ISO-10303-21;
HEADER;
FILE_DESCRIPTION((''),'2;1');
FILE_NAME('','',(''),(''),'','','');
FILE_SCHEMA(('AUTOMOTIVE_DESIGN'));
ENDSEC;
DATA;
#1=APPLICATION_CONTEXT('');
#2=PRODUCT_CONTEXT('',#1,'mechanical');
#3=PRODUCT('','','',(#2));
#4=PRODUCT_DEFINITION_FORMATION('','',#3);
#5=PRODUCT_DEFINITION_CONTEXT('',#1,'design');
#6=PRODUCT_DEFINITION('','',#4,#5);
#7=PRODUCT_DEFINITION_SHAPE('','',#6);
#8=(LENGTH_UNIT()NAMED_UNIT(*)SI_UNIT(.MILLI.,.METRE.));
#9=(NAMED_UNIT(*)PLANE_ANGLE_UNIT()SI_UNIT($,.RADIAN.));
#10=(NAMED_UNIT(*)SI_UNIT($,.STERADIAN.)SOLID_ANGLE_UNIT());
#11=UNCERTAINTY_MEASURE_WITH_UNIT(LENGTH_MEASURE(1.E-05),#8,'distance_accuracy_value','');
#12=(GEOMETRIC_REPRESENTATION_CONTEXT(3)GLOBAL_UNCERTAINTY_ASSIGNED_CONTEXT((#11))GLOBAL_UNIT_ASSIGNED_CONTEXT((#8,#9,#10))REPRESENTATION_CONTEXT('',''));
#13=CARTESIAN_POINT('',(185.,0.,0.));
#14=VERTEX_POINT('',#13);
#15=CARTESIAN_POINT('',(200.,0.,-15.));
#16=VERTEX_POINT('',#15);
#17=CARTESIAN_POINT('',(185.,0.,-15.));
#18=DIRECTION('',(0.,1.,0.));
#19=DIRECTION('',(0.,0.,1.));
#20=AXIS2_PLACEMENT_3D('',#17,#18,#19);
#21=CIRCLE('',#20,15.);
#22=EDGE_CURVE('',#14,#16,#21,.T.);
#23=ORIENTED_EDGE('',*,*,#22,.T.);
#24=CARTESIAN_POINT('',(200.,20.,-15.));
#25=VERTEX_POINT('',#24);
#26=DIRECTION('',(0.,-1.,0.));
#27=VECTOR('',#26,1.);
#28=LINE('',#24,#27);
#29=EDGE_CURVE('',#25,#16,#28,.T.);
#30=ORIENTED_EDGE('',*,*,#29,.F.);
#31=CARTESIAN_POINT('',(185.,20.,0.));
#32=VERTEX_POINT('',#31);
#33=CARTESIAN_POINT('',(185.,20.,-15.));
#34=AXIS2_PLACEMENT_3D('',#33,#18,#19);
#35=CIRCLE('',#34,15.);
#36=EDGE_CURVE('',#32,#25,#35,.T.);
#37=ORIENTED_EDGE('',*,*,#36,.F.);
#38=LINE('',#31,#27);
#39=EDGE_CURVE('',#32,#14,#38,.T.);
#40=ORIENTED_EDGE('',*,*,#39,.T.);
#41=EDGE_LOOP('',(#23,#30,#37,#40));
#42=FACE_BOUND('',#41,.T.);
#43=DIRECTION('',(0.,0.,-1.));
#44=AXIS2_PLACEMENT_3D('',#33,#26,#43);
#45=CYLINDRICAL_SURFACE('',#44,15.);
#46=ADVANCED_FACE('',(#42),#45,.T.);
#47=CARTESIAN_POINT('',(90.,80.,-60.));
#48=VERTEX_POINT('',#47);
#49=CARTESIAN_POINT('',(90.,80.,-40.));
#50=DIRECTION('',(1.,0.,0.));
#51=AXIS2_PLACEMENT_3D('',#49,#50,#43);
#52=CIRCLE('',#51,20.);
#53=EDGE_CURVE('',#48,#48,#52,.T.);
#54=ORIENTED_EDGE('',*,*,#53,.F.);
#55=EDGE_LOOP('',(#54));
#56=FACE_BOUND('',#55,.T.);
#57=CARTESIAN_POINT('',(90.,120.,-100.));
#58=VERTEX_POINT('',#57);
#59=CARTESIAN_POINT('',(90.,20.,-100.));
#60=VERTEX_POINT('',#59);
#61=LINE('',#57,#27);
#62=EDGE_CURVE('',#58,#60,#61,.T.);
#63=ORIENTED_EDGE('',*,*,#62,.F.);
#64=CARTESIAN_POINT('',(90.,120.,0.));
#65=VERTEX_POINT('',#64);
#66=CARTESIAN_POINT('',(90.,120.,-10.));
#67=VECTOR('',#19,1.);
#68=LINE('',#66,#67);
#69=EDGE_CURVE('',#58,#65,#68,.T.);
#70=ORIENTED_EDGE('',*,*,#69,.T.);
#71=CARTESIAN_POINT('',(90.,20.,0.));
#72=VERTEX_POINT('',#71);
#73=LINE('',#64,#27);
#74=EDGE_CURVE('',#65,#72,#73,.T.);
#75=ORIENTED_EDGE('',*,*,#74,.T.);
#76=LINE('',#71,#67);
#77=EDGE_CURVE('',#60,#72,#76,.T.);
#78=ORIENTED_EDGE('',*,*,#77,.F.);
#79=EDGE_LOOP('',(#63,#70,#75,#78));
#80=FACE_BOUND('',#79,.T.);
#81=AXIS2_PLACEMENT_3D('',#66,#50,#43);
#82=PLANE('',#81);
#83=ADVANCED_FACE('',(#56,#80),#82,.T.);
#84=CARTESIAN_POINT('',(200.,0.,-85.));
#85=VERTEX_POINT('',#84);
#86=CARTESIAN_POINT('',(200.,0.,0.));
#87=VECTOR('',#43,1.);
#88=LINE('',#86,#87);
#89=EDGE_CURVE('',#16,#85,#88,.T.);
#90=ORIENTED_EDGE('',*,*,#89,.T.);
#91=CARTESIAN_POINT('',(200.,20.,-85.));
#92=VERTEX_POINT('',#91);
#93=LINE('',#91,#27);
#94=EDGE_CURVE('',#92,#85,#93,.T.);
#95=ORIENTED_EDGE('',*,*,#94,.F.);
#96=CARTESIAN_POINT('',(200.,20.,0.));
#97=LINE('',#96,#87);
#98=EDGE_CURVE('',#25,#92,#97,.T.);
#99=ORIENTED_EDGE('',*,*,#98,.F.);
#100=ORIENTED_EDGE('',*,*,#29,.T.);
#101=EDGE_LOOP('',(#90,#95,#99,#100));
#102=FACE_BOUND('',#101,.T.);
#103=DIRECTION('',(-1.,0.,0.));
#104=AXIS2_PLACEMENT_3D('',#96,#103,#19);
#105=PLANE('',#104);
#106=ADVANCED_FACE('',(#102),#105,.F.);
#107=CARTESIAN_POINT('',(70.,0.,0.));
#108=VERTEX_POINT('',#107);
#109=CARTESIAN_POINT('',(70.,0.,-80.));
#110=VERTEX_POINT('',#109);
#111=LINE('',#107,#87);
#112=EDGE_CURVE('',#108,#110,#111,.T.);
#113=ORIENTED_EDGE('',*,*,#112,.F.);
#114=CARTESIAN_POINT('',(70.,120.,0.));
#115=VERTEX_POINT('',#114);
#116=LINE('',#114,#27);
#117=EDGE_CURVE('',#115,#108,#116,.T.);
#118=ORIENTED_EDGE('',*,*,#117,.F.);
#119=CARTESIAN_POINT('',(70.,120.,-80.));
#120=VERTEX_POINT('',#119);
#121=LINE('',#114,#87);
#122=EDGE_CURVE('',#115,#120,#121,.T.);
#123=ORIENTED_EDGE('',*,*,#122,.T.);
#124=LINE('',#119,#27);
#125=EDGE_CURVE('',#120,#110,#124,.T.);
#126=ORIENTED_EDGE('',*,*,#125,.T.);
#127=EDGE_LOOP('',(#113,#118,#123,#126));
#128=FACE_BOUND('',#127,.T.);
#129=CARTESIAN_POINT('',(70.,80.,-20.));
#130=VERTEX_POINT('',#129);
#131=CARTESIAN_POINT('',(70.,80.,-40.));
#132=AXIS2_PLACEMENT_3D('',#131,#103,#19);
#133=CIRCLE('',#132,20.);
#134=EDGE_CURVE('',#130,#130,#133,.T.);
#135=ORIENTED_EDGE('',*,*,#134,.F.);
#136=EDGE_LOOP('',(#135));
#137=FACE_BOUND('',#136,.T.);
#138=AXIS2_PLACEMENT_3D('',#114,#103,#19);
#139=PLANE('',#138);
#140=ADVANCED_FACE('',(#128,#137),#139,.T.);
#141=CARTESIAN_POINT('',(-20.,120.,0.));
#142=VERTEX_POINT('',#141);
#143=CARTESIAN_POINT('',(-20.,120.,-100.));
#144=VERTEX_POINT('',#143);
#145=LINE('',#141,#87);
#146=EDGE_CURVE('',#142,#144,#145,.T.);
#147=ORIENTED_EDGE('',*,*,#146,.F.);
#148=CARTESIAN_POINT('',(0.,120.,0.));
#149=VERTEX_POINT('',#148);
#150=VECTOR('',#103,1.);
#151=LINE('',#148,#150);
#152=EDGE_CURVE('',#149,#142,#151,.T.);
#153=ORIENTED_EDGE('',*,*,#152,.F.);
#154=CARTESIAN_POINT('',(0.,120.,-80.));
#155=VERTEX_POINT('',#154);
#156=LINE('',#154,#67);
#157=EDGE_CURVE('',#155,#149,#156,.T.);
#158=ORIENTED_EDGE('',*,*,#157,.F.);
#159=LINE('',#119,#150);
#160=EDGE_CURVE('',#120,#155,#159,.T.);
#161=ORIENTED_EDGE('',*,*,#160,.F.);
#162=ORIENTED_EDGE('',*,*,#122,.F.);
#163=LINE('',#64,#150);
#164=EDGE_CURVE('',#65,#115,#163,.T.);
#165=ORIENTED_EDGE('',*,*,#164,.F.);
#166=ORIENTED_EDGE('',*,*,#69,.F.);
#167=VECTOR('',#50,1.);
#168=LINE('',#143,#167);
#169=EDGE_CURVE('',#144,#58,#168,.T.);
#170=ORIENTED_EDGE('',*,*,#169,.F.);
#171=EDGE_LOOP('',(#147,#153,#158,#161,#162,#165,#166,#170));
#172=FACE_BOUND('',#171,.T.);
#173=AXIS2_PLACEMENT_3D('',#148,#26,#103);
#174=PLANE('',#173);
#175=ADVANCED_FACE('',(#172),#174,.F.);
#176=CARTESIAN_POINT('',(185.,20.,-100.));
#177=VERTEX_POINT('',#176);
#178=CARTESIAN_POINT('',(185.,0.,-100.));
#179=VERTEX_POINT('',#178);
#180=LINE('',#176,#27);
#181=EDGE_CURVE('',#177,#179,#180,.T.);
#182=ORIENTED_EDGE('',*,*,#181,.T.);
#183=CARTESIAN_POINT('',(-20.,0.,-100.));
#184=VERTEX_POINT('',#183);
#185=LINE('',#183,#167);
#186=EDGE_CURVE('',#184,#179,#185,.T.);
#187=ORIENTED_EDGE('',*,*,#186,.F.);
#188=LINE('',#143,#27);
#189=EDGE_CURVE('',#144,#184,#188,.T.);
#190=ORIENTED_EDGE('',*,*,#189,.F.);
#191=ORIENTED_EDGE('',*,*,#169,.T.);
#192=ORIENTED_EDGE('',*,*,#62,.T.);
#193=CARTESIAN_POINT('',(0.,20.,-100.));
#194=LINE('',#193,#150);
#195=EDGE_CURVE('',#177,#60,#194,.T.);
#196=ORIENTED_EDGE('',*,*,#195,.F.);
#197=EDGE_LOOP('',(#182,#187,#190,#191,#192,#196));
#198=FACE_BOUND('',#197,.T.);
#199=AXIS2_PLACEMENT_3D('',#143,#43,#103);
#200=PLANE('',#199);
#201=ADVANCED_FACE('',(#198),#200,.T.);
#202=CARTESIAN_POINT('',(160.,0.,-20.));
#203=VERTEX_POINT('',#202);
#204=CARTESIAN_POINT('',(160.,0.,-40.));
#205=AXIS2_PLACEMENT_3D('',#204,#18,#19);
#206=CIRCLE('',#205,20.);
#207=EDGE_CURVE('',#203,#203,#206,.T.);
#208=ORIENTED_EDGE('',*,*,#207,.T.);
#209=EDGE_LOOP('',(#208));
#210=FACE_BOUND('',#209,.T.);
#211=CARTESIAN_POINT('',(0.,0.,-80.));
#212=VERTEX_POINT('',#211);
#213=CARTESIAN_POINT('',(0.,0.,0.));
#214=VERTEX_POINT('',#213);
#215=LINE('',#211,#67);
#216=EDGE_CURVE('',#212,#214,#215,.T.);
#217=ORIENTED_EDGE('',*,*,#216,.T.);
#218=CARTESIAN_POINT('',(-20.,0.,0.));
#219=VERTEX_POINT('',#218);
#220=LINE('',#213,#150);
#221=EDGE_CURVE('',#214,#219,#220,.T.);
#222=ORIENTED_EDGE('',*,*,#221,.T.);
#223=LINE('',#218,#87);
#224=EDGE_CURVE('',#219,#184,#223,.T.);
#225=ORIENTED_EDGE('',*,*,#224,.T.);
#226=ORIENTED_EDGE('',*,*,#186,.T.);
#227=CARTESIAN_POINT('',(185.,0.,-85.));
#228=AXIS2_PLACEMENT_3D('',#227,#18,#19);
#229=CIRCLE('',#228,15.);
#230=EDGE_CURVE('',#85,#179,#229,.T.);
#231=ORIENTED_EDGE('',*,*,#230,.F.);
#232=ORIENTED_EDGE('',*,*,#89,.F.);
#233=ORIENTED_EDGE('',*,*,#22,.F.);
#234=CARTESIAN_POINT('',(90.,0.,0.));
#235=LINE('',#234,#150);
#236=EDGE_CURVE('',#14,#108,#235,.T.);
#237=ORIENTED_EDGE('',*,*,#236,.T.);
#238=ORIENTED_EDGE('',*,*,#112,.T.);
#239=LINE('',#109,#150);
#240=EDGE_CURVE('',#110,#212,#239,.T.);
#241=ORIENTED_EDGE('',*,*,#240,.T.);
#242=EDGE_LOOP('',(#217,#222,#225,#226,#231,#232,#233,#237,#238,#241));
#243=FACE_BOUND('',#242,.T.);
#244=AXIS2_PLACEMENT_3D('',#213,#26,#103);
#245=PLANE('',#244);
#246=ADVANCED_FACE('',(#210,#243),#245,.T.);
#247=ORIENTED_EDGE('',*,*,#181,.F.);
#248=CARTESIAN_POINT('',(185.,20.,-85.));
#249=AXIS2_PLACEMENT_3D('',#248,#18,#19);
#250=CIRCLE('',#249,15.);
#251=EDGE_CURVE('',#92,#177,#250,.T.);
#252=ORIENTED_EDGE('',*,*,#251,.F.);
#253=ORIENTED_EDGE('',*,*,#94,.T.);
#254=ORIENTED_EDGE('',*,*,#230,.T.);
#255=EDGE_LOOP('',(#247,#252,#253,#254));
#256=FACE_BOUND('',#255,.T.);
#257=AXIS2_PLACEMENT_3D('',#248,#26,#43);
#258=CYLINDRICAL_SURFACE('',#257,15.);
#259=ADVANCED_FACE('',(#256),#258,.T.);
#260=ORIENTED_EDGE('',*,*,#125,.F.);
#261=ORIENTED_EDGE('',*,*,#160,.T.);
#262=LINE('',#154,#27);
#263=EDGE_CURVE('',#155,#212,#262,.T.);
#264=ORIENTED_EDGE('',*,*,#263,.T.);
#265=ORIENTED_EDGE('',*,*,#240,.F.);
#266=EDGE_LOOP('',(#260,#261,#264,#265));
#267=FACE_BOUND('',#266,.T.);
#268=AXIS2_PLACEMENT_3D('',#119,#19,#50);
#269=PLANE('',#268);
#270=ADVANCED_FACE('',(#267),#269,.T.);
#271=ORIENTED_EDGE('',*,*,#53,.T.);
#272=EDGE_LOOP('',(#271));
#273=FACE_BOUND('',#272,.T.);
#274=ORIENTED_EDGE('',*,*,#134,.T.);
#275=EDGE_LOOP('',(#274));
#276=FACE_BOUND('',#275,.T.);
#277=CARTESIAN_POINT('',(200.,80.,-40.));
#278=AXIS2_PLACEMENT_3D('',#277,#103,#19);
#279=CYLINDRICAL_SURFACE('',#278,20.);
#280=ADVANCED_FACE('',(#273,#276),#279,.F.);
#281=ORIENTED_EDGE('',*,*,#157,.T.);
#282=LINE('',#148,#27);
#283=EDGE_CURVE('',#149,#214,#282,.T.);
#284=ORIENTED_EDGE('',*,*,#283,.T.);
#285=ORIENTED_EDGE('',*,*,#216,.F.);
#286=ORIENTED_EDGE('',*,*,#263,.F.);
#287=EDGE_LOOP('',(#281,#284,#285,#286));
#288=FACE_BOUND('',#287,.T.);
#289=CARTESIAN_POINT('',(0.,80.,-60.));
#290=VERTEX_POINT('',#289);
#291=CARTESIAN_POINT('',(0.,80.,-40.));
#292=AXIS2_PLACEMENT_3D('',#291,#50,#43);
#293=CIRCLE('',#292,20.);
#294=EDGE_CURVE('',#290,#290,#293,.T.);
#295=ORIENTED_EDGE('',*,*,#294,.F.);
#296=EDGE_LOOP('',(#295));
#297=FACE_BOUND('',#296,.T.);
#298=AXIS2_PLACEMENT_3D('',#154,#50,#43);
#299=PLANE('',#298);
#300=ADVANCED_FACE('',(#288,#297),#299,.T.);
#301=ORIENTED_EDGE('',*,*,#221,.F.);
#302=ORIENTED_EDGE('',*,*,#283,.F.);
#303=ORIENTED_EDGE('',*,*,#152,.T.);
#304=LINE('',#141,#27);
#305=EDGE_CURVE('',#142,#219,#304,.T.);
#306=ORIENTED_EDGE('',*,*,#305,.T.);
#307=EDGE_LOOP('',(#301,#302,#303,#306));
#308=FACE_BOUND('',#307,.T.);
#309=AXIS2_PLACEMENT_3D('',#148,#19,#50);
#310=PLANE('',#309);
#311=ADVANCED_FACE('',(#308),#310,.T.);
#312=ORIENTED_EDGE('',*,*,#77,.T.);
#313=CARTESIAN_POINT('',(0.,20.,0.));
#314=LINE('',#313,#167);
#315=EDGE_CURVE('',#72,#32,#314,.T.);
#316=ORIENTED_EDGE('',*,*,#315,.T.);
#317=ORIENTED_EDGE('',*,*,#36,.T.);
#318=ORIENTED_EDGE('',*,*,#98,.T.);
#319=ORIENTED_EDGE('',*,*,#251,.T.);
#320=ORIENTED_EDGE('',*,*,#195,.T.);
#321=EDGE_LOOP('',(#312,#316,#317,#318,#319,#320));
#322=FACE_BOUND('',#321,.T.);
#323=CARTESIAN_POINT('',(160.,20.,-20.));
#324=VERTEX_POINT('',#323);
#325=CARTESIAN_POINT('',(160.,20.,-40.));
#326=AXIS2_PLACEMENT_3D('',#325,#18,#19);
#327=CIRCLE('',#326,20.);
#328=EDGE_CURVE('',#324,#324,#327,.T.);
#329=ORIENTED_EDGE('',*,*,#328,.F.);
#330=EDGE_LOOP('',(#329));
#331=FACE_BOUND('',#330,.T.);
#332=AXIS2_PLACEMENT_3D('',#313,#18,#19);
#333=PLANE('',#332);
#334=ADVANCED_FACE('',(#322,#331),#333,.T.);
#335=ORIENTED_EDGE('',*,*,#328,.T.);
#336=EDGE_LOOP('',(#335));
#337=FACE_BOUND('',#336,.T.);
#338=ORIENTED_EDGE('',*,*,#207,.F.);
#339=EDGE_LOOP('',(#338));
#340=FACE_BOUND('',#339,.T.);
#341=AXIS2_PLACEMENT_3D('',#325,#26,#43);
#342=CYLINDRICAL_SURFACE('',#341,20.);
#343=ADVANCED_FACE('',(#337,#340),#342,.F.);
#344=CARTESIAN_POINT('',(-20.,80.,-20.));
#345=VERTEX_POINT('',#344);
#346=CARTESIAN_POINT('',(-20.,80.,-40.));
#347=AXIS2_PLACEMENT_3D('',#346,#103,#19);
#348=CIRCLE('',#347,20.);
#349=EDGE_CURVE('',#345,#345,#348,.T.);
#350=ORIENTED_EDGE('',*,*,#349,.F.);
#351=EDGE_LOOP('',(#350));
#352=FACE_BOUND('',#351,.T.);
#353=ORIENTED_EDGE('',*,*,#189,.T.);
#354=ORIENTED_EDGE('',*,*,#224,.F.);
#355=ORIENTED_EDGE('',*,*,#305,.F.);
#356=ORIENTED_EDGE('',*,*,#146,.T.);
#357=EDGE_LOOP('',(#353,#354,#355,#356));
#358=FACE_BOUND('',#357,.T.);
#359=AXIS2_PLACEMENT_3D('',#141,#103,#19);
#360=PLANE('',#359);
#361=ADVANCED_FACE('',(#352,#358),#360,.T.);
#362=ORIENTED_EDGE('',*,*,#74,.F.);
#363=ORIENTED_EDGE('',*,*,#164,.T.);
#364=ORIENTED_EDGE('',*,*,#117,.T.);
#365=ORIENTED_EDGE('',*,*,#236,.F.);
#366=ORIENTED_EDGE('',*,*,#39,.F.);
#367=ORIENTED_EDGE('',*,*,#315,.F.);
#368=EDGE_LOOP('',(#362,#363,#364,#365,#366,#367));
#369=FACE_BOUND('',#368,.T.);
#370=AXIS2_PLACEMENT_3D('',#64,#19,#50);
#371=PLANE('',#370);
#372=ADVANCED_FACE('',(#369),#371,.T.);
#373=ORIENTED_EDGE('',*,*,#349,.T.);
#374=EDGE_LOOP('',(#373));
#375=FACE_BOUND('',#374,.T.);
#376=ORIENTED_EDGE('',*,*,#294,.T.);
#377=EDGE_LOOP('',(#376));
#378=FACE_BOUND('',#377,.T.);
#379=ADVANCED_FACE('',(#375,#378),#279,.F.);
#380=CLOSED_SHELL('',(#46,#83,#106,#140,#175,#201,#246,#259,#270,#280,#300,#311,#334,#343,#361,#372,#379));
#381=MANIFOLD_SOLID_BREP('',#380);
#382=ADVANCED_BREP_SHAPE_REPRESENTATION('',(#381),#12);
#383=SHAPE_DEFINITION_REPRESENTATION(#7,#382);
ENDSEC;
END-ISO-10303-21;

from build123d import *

# Parameters (mm, degrees)
EXTRUDE_1_DEPTH          = 120
SKETCH_1_4_R             = 20
EXTRUDE_1_2_DEPTH        = 20
CUT_EXTRUDE_1_DEPTH      = 270.814751265
CUT_EXTRUDE_1_DEPTH_BACK = 270.814751265
SKETCH_2_R               = 20


# Read off the part's stored shape, not the designer's step: 拉伸-薄壁1
with BuildPart() as part:
    # Extrude 1 outline → Extrude 1 (new body)
    with BuildSketch(Plane(origin=(0, 0, 0), x_dir=(1, 0, 0), z_dir=(0, 1, 0))):
        Polygon((-20, 0), (0, 0), (0, 80), (70, 80), (70, 0), (90, 0), (90, 100), (-20, 100), align=None)
    extrude(amount=EXTRUDE_1_DEPTH)

    # 草图1<4> → Extrude 1 2 (add)
    with BuildSketch(Plane(origin=(0, 0, 0), x_dir=(1, 0, 0), z_dir=(0, 1, 0))):
        with BuildLine():
            Line((90, 0), (185, 0))
            ThreePointArc((185, 0), (195.606601718, 4.393398282), (200, 15))
            Line((200, 15), (200, 85))
            ThreePointArc((200, 85), (195.606601718, 95.606601718), (185, 100))
            Line((185, 100), (90, 100))
            Line((90, 100), (90, 0))
        make_face()
        with Locations(Location((160, 40, 0), (0, 0, 270))):
            Circle(SKETCH_1_4_R, mode=Mode.SUBTRACT)
    extrude(amount=EXTRUDE_1_2_DEPTH)

    # 草图2 → 切除-拉伸1 (cut, two sides: drawn at the far end of the back side and taken through both)
    with BuildSketch(Plane.ZY.offset(20).offset(-CUT_EXTRUDE_1_DEPTH_BACK)):
        with Locations((-40, 80)):
            Circle(SKETCH_2_R)
    extrude(amount=CUT_EXTRUDE_1_DEPTH + CUT_EXTRUDE_1_DEPTH_BACK, mode=Mode.SUBTRACT)


solid = part.part
